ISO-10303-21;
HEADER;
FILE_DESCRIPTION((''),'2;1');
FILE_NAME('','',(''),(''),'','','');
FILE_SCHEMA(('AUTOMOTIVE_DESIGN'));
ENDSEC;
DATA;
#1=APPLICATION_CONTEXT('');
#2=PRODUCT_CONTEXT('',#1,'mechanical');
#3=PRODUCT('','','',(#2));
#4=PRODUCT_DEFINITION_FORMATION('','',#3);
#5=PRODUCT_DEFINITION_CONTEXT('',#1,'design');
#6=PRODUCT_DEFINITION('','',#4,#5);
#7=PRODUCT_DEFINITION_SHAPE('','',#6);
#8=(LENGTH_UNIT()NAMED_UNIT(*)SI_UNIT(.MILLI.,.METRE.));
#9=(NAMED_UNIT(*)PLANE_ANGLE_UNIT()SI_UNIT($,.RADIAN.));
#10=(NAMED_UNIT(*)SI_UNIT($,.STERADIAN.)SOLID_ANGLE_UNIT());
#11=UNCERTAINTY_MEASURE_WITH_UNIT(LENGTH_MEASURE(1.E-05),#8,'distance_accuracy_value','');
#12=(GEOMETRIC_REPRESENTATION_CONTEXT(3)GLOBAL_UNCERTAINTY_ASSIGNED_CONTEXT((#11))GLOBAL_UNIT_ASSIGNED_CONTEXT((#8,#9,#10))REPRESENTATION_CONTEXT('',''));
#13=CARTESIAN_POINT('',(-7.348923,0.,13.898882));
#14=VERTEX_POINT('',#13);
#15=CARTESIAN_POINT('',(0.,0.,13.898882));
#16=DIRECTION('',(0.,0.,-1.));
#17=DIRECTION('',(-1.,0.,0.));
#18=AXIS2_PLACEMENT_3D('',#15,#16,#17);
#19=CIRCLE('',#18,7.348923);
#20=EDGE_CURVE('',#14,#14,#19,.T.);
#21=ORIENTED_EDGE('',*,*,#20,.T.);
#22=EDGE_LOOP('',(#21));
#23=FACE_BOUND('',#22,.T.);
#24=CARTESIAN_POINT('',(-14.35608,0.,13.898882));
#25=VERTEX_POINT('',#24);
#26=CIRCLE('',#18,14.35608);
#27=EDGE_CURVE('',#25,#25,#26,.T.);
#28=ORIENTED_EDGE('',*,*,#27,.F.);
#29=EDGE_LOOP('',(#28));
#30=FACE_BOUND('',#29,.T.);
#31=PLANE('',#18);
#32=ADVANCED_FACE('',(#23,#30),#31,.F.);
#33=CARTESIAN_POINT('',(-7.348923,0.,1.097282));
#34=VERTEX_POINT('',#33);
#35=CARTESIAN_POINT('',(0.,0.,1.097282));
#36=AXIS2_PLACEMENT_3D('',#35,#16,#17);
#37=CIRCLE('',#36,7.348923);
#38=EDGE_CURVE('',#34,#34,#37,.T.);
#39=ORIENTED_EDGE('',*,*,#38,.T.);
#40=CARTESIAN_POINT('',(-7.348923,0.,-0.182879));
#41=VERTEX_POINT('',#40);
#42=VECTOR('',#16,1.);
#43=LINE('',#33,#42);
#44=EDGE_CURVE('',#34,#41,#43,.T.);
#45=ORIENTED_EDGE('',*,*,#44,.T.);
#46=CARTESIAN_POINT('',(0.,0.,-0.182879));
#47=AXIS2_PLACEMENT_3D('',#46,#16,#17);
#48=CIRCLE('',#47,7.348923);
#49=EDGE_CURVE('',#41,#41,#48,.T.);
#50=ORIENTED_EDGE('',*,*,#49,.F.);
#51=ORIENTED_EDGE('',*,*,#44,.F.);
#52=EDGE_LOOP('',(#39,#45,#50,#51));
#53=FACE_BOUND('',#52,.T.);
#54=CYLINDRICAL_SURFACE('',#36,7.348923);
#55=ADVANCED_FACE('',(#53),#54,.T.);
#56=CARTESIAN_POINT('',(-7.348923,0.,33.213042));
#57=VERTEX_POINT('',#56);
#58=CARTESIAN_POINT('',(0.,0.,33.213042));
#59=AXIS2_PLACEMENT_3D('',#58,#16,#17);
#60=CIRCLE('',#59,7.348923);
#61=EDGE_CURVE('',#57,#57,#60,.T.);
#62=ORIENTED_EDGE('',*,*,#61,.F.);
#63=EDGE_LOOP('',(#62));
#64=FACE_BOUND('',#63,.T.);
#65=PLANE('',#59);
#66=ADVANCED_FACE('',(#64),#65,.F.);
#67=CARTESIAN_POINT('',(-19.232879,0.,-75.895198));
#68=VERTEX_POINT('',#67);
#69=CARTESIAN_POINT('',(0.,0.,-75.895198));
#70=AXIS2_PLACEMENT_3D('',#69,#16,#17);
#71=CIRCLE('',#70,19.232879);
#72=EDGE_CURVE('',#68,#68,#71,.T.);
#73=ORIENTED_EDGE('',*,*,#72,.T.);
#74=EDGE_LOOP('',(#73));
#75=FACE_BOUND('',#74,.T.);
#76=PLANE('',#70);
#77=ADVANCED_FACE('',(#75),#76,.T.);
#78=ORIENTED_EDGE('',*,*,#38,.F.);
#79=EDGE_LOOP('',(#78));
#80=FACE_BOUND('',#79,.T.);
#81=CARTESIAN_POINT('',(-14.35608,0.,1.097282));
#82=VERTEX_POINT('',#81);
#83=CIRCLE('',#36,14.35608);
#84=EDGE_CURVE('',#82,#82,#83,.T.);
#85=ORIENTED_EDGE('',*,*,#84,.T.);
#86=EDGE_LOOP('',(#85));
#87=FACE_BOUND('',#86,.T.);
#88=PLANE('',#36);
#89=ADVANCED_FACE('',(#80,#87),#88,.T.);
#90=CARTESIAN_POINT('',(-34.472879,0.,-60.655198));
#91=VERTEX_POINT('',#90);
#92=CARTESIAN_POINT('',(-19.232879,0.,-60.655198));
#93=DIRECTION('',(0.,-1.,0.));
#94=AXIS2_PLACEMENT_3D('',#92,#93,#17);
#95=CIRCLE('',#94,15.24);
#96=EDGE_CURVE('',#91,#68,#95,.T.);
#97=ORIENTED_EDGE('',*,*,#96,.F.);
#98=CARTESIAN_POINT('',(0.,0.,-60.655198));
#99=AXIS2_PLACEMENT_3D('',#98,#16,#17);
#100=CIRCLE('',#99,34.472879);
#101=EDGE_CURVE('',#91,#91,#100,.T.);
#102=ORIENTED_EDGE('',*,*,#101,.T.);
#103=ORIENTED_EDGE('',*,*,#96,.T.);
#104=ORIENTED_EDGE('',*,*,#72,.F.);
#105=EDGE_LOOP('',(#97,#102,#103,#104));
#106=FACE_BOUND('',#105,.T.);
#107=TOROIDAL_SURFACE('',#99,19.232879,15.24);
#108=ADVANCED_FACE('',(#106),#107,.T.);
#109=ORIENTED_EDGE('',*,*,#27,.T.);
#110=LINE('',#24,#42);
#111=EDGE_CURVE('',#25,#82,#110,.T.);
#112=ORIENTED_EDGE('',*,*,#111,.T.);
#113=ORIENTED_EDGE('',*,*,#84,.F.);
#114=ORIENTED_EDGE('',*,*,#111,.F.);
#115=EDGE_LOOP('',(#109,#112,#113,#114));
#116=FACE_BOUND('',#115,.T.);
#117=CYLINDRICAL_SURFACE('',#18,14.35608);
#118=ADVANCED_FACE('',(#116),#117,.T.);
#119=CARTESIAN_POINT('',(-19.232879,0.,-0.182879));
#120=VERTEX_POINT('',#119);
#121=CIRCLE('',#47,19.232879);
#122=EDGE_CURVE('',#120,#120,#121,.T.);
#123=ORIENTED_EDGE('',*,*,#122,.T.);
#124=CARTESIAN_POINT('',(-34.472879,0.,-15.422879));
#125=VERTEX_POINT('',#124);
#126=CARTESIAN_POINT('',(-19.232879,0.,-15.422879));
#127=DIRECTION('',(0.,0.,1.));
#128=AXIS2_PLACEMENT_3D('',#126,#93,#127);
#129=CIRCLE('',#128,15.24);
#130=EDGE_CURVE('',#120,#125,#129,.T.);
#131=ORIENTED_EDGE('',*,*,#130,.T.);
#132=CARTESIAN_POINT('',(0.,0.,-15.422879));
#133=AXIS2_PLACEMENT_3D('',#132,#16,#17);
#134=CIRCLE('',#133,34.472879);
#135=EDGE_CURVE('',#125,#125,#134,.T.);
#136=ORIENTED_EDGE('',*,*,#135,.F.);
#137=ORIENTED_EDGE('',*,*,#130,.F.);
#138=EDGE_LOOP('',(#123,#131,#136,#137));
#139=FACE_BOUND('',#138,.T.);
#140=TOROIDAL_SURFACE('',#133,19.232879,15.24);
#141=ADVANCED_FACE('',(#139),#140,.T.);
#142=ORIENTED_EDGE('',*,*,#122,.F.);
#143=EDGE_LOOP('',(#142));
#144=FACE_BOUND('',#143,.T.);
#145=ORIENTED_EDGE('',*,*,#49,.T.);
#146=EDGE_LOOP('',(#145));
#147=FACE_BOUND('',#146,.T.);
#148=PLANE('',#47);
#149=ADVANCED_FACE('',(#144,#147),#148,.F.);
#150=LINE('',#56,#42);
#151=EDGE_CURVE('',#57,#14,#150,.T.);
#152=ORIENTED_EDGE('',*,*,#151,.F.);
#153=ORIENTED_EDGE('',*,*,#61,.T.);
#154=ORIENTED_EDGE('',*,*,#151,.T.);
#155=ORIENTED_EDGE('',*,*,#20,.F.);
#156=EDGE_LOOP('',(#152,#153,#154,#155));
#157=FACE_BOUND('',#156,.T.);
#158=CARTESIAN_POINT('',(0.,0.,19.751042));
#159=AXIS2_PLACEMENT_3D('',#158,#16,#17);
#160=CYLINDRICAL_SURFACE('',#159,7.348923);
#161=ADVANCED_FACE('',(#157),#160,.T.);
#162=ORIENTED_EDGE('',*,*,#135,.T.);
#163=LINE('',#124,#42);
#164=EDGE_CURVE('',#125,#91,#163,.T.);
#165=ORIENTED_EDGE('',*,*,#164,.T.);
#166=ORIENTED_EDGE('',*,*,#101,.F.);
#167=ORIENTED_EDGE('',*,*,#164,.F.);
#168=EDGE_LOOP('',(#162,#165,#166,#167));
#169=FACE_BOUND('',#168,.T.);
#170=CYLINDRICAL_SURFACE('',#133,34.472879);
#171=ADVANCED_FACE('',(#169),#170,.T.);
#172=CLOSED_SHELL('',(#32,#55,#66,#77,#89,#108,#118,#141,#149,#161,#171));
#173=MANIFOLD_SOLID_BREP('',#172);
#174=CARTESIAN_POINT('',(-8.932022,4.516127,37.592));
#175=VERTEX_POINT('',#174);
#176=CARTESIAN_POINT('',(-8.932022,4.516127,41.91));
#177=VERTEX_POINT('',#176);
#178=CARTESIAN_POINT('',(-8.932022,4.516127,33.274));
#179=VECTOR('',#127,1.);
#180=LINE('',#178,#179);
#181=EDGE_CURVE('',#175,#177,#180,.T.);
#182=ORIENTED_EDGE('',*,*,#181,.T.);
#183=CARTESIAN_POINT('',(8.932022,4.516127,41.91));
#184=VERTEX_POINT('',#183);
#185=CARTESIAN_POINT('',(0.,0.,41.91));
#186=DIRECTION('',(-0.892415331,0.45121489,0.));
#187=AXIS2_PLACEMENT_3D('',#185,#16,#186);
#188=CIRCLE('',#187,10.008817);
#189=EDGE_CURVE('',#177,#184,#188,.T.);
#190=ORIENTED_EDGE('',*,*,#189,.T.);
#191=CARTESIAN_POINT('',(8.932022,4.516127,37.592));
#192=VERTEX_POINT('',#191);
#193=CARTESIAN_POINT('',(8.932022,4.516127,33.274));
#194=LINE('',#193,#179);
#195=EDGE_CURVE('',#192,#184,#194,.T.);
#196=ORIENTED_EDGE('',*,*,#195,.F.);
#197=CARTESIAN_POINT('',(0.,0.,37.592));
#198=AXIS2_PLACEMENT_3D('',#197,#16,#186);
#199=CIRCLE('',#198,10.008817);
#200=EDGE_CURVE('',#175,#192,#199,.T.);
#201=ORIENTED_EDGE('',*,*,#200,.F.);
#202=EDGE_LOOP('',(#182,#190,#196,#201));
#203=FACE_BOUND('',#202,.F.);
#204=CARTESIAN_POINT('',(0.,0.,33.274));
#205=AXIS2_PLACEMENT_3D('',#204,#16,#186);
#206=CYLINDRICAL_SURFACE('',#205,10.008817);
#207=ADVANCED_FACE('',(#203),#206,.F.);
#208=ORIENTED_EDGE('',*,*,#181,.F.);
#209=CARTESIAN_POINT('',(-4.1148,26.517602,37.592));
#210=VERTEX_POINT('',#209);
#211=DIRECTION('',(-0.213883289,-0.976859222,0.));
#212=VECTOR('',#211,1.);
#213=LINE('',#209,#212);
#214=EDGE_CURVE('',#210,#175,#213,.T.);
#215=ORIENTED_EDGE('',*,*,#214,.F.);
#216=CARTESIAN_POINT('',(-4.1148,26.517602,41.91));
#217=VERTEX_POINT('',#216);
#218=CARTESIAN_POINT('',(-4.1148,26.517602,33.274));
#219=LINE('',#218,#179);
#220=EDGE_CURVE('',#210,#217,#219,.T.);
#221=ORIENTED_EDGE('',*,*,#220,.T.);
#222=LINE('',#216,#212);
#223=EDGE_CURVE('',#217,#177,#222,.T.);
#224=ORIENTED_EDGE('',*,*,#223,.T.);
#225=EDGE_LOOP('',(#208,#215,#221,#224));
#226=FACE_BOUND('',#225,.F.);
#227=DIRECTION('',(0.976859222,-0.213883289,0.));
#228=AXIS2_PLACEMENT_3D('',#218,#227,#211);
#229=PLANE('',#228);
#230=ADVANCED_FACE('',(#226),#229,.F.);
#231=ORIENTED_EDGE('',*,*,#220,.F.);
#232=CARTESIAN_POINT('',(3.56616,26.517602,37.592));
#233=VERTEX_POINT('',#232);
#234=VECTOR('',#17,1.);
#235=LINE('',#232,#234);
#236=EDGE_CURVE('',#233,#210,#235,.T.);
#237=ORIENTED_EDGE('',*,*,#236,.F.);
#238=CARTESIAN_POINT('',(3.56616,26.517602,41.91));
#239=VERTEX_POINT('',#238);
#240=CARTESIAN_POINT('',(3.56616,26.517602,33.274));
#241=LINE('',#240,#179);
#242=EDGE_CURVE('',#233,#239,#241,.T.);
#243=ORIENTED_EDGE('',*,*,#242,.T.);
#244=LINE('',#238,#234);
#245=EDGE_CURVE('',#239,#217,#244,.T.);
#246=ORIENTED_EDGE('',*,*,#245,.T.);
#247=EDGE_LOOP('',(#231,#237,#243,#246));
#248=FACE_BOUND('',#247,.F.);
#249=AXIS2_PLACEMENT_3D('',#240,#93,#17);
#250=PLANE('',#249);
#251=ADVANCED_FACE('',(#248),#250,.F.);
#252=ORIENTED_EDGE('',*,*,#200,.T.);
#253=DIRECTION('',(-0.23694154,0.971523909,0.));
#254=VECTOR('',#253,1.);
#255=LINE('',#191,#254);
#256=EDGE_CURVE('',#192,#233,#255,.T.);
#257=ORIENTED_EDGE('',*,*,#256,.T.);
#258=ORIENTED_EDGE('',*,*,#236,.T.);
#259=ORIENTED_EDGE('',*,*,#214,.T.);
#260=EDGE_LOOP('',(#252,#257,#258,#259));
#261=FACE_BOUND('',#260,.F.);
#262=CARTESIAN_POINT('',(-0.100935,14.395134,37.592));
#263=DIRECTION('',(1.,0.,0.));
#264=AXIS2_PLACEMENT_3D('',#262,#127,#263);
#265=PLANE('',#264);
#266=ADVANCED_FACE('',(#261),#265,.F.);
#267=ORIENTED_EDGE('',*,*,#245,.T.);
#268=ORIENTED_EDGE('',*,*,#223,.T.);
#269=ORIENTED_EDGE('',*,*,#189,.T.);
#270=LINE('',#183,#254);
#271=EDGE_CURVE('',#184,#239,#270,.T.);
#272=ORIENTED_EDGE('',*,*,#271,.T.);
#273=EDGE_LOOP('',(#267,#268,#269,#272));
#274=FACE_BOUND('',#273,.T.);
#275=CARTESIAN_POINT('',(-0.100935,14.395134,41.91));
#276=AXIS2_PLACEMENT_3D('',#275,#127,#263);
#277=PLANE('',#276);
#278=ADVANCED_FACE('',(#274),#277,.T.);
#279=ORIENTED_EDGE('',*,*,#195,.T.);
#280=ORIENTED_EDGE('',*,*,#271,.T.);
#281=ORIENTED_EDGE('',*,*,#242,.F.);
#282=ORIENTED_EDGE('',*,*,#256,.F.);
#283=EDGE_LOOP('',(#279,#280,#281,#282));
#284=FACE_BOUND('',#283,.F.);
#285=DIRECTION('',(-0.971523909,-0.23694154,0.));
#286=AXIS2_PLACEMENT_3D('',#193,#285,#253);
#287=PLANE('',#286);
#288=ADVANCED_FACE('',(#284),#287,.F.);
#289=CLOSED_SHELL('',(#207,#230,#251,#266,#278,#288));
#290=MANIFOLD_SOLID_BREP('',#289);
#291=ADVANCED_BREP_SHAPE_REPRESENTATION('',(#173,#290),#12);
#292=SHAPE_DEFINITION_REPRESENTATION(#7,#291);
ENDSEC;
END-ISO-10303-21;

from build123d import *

# Parameters (mm, degrees)
F2_DEPTH = 13.462
F5_DEPTH = 8.636
F6_DEPTH = 4.318


# Not quite as in the source:
# - the program builds the solid bodies; features that only make, move or delete a surface that nothing else refers to are left out


with BuildPart() as f1:
    # F0 (on Front) → F1 (revolve)
    with BuildSketch(Plane.XZ):
        with BuildLine():
            Line((0, -75.8951976895), (0, -0.1828786626))
            Line((0, -0.1828786626), (-7.3489234783, -0.1828786626))
            Line((-7.3489234783, -0.1828786626), (-19.2328790224, -0.1828786626))
            ThreePointArc((-19.2328790224, -0.1828786626), (-30.0091863676, -4.6465713173), (-34.4728790224, -15.4228786626))
            Line((-34.4728790224, -15.4228786626), (-34.4728790224, -60.6551976895))
            ThreePointArc((-34.4728790224, -60.6551976895), (-30.0091863676, -71.4315050348), (-19.2328790224, -75.8951976895))
            Line((-19.2328790224, -75.8951976895), (0, -75.8951976895))
        make_face()
        Polygon((-7.3489234783, -0.1828786626), (0, -0.1828786626), (0, 0), (0, 19.7510421276), (-7.3489234783, 19.7510421276), (-7.3489234783, 13.8988820836), (-14.3560804427, 13.8988820836), (-14.3560804427, 1.0972818127), (-7.3489234783, 1.0972818127), align=None)
    revolve(axis=Axis((0, 0, 9.8755210638), (0, 0, -1)))

    # F2 (add): a face of the model
    f2_faces = [f1.faces().sort_by_distance(p)[0] for p in [
        (0, 0, 19.7510421276),
    ]]
    extrude(f2_faces, amount=F2_DEPTH)


with BuildPart() as f5:
    # F4 (on offset) → F5 (new body)
    with BuildSketch(Plane.XY.offset(33.274)):
        with BuildLine():
            ThreePointArc((-8.9320220688, 4.516127424), (0, 10.0088173701), (8.9320220688, 4.516127424))
            Line((8.9320220688, 4.516127424), (3.5661600996, 26.5176016837))
            Line((3.5661600996, 26.5176016837), (-4.1148001328, 26.5176016837))
            Line((-4.1148001328, 26.5176016837), (-8.9320220688, 4.516127424))
        make_face()
    extrude(amount=F5_DEPTH)

    # F6 (cut): a face of the model
    f6_faces = [f5.faces().sort_by_distance(p)[0] for p in [
        (-0.1584815304, 16.4759025541, 33.274),
    ]]
    extrude(f6_faces, amount=-F6_DEPTH, mode=Mode.SUBTRACT)


solid = Compound([f1.part, f5.part])
